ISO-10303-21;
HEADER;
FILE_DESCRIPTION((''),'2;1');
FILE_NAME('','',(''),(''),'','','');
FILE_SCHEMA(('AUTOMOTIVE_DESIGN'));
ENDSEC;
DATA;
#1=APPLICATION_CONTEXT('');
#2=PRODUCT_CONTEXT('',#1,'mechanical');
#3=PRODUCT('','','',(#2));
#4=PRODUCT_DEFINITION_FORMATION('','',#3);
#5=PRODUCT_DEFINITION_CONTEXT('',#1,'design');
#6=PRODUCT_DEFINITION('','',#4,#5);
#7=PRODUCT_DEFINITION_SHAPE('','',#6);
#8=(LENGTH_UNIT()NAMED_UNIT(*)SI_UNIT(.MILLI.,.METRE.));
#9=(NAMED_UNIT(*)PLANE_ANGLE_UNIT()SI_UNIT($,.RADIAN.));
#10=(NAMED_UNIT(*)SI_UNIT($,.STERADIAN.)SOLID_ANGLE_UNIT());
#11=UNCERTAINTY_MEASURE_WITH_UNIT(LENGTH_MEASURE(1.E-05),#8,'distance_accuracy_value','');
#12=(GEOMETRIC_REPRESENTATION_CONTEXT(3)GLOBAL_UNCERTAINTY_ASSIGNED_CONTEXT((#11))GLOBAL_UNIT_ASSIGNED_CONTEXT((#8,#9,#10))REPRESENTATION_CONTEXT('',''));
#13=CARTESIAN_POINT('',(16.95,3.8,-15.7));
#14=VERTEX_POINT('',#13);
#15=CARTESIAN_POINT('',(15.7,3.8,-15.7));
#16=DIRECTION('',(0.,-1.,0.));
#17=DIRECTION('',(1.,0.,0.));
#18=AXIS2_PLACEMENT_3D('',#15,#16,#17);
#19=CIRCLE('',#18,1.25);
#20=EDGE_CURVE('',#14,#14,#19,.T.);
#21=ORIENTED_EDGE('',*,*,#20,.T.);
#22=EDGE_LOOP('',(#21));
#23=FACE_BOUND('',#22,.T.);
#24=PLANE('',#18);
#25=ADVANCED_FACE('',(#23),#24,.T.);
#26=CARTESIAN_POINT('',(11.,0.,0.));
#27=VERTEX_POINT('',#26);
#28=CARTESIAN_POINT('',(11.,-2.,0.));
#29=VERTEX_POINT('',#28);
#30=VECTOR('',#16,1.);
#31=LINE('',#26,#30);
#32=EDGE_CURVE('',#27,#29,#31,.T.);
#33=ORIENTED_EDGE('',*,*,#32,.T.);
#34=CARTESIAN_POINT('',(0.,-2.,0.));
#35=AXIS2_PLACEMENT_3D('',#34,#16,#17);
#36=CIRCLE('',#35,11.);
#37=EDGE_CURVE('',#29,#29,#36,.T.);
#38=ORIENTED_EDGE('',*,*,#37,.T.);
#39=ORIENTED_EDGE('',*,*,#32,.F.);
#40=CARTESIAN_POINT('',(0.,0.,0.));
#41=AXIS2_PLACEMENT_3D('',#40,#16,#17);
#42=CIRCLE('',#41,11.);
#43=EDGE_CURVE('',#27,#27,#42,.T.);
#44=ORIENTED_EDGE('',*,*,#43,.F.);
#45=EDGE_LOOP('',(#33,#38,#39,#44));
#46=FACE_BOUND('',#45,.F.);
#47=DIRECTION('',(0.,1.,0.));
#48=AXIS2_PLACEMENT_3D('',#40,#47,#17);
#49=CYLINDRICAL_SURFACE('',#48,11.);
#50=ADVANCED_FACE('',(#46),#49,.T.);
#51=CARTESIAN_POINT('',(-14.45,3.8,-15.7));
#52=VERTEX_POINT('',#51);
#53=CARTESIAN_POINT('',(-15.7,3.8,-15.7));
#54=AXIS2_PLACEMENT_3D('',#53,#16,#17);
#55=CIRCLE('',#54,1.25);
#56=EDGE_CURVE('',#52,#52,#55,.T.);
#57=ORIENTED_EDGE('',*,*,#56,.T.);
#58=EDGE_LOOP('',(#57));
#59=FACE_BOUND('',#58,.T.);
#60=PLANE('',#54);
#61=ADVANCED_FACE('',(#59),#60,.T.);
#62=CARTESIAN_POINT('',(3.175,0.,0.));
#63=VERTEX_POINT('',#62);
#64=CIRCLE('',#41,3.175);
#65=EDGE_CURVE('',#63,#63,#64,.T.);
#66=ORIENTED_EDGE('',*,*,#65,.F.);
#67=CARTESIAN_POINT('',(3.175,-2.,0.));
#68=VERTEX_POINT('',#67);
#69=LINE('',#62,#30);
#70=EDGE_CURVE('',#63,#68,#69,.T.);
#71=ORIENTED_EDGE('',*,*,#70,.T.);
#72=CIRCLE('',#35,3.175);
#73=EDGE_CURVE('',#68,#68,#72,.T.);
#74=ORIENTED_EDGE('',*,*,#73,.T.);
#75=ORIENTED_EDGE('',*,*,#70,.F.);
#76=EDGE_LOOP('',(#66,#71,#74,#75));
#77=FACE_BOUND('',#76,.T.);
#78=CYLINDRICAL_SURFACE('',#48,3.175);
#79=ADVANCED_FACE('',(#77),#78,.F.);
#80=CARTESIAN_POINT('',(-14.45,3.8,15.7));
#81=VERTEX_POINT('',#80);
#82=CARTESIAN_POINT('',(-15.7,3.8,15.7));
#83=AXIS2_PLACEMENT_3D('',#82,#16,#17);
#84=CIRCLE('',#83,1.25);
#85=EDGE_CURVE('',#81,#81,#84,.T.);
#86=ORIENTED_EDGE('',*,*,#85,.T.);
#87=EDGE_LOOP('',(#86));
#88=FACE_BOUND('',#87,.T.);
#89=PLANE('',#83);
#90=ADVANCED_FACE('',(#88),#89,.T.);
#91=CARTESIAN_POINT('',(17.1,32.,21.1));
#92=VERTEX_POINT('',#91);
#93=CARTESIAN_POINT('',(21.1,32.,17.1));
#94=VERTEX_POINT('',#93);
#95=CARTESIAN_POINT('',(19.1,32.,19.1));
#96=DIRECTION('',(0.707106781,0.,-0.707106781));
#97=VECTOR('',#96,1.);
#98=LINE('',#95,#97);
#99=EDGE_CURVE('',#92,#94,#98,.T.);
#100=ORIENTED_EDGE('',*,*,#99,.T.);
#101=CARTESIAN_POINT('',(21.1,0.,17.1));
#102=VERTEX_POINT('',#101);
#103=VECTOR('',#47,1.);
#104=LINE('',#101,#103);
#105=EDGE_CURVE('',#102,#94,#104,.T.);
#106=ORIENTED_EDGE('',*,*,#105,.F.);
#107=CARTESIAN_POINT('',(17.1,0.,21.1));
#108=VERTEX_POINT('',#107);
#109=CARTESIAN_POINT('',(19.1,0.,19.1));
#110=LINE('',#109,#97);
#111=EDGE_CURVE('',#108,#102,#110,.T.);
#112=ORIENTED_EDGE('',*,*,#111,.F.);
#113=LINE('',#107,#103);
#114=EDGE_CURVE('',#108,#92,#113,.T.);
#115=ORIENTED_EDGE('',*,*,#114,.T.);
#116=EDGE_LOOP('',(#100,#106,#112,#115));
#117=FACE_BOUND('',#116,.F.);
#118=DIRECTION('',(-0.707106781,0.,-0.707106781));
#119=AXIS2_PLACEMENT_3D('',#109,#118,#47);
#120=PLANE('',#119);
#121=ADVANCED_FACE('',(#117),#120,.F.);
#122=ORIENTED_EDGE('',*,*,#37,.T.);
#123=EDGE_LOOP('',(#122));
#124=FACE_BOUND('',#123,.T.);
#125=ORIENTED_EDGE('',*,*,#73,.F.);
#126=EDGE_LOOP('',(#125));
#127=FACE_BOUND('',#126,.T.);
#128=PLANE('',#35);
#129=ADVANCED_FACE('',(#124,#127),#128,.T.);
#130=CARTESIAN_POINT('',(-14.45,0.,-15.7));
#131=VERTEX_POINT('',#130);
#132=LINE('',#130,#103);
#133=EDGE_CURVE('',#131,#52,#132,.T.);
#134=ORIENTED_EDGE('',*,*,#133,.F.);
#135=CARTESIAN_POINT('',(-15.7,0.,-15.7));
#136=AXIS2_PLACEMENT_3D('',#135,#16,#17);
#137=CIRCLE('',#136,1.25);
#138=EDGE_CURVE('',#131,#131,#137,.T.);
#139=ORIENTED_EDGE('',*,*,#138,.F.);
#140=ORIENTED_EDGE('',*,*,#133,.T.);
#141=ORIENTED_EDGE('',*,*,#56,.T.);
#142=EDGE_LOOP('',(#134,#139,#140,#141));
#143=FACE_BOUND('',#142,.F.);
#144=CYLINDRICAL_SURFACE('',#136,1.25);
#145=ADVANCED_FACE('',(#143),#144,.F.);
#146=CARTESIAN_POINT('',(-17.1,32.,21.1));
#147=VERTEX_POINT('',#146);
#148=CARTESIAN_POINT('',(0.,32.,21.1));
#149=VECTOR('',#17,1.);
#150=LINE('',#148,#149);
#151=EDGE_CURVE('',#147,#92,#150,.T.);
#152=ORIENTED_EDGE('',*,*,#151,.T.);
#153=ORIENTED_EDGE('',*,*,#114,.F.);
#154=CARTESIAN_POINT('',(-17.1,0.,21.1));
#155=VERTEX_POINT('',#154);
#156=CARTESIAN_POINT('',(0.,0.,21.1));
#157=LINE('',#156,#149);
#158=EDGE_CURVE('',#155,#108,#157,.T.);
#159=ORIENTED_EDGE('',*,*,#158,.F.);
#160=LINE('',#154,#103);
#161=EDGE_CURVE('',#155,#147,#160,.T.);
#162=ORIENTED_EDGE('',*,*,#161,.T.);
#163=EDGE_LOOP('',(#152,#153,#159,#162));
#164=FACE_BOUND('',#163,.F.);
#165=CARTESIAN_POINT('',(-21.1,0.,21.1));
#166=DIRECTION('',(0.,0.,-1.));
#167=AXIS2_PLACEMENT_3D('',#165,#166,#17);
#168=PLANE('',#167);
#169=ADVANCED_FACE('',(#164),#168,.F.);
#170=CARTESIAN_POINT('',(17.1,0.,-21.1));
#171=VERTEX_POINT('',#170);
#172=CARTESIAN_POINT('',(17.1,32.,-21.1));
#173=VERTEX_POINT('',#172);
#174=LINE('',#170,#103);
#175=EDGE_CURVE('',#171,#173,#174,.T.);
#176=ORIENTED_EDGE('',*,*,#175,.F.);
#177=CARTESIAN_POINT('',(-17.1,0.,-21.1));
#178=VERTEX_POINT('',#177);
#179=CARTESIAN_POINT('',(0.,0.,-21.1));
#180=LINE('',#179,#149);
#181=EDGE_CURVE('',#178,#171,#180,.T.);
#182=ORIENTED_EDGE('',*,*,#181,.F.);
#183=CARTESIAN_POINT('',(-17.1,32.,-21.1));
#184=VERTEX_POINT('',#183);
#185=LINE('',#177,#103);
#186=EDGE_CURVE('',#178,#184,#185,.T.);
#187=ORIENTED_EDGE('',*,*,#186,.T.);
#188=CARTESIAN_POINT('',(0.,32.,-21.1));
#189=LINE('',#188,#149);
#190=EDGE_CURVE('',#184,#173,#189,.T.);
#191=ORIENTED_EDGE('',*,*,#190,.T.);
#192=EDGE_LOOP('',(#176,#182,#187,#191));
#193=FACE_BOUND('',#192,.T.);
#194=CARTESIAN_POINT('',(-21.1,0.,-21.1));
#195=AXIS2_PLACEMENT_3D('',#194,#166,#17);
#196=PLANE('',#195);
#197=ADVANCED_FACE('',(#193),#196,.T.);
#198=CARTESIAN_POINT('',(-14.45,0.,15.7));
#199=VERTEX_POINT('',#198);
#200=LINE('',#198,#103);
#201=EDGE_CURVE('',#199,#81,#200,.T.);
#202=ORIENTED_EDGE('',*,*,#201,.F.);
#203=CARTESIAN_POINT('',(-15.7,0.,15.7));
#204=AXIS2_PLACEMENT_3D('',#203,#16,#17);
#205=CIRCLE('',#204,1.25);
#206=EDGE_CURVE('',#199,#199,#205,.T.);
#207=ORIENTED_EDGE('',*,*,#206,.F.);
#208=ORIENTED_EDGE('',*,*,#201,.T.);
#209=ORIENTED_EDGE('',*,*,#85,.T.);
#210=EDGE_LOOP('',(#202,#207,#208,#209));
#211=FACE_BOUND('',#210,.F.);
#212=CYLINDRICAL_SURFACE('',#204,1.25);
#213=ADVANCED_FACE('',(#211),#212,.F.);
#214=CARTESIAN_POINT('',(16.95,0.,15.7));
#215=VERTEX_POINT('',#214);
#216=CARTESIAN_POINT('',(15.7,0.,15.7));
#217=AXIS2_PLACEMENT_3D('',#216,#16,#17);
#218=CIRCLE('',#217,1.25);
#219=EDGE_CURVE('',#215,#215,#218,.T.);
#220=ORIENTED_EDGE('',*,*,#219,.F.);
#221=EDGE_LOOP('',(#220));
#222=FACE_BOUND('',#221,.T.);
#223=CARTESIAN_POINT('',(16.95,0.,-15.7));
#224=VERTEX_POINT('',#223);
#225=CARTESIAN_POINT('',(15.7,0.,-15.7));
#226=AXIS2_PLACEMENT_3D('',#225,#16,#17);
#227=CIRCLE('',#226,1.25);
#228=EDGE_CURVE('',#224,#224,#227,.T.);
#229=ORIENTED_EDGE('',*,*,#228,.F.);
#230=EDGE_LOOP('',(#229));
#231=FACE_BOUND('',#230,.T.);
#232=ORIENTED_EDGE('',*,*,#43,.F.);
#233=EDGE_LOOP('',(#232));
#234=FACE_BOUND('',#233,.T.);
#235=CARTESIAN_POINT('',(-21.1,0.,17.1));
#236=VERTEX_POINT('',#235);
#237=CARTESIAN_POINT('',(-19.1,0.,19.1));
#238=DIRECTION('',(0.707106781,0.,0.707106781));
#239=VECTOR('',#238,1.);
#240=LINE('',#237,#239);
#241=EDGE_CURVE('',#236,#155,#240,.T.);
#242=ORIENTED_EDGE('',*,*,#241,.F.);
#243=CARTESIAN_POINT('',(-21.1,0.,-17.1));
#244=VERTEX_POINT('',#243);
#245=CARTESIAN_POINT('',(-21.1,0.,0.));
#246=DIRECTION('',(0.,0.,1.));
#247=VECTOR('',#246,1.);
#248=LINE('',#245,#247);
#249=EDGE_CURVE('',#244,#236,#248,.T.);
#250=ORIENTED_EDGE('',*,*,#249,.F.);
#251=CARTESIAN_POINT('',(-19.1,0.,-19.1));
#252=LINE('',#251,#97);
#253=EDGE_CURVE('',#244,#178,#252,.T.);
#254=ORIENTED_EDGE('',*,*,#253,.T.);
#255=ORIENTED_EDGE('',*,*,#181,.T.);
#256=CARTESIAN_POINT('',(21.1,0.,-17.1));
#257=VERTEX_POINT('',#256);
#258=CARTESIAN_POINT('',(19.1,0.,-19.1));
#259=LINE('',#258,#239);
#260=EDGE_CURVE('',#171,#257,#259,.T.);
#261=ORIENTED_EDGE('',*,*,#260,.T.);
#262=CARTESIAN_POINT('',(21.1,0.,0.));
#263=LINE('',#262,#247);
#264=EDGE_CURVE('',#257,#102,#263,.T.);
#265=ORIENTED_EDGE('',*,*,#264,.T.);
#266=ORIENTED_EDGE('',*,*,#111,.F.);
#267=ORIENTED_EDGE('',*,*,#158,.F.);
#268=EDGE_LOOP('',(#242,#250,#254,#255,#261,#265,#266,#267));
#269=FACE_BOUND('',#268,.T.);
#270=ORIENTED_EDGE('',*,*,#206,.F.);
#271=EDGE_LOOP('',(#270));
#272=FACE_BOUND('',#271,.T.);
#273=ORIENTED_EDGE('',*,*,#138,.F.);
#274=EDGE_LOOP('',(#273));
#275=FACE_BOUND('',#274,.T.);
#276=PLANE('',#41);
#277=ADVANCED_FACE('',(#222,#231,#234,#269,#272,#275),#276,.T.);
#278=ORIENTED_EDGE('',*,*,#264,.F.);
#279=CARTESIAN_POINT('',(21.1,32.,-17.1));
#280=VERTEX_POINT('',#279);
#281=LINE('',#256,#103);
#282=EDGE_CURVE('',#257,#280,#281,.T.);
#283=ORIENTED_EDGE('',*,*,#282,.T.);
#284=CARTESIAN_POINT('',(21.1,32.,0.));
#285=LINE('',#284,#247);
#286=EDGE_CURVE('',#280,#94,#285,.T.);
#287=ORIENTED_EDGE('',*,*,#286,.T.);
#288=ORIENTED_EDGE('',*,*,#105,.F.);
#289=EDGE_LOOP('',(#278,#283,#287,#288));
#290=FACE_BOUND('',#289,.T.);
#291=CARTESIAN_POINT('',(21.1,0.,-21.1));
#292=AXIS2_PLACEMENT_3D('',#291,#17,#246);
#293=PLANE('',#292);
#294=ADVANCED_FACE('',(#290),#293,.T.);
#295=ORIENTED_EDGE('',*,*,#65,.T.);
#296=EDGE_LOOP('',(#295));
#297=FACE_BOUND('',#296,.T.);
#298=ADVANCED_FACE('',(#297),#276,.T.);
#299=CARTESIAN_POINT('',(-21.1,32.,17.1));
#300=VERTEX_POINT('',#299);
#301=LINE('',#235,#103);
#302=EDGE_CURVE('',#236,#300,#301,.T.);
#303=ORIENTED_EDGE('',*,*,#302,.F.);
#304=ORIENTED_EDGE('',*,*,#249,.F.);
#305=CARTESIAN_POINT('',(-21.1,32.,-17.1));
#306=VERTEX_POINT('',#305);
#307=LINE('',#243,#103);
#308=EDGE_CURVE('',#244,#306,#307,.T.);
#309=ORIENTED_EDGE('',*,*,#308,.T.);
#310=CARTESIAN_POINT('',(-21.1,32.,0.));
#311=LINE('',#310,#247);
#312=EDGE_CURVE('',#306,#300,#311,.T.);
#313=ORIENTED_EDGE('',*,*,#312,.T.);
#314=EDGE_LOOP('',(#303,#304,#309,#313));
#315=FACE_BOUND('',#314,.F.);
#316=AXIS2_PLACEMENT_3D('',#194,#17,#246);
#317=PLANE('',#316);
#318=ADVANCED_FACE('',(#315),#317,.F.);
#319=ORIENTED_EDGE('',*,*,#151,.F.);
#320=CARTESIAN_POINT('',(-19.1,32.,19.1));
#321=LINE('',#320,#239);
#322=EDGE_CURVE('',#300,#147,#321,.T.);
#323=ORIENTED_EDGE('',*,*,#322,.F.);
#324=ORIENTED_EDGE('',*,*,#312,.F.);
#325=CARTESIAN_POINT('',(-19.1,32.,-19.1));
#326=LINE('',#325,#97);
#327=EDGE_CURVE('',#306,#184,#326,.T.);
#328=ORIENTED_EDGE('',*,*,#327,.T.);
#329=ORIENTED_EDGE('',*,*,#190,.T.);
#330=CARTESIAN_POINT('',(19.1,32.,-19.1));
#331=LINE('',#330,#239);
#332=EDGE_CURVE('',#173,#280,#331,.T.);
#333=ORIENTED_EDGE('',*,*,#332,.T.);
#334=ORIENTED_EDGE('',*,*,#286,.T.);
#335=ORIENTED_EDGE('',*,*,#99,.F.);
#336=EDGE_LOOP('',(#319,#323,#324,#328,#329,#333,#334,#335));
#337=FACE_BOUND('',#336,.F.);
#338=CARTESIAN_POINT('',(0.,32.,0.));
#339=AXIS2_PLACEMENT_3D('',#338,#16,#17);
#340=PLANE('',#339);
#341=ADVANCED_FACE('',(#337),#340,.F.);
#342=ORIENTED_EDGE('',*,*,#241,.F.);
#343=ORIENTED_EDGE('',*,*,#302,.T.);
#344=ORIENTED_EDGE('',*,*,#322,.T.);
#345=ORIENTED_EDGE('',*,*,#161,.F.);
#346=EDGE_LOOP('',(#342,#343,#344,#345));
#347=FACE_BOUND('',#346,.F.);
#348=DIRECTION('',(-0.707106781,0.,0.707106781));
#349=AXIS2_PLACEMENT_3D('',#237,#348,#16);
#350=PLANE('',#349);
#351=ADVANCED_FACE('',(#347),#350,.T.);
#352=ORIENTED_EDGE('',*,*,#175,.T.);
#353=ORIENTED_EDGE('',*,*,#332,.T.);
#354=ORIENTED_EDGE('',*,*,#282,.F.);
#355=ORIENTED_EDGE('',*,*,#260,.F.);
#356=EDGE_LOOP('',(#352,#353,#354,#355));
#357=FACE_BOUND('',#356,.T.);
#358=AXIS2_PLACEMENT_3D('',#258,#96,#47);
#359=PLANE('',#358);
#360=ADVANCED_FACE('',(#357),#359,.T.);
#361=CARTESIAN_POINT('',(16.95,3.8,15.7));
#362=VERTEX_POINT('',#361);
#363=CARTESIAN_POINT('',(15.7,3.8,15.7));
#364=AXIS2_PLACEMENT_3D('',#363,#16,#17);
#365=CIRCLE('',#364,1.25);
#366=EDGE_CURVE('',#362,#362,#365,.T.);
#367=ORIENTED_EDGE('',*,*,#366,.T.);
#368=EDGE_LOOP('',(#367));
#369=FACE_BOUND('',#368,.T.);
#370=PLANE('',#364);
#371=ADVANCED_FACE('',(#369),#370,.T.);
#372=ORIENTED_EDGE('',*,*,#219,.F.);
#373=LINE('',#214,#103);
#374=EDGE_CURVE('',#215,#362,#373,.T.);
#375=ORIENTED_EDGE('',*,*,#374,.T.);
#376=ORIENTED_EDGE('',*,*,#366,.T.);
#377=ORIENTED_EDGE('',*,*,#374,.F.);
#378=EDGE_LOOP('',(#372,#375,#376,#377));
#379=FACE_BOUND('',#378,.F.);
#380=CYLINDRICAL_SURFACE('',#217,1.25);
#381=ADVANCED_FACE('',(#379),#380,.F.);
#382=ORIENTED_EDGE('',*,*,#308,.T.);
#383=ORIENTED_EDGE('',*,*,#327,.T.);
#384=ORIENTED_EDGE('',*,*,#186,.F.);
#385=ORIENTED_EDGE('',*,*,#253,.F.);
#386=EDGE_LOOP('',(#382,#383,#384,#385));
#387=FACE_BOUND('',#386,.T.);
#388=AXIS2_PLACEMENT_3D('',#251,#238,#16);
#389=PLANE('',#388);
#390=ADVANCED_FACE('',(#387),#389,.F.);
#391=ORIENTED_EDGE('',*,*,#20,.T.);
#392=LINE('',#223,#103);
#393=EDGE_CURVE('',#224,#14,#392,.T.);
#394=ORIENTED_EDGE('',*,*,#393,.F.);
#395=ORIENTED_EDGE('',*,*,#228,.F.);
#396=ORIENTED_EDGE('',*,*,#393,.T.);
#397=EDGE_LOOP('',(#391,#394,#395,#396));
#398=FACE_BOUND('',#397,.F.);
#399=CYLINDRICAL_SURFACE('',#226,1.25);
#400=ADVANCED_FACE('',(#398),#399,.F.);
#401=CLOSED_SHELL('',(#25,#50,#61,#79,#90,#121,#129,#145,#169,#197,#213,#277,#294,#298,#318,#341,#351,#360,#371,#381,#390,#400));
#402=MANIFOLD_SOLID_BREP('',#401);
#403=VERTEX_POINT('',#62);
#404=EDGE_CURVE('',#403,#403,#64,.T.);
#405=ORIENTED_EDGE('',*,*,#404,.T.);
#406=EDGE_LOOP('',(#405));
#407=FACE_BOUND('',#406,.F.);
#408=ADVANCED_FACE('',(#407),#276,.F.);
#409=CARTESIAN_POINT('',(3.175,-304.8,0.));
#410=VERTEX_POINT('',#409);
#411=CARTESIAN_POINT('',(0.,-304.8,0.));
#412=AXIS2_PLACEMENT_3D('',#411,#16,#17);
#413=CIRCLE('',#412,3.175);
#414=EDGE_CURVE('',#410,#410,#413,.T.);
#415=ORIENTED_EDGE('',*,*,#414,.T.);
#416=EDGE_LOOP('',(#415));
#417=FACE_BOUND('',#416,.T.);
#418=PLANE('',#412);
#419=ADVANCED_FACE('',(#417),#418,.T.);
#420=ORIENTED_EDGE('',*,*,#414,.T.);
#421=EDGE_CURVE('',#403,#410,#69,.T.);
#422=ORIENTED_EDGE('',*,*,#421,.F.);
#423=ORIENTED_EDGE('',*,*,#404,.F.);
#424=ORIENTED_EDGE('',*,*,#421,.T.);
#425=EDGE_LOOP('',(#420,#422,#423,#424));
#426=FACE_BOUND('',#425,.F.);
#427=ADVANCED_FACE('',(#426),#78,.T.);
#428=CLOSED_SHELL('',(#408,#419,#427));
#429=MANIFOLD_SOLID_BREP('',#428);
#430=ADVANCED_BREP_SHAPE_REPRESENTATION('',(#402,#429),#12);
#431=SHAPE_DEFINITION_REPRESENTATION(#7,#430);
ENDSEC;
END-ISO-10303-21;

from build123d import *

# Parameters (mm, degrees)
F0_W     = 42.2
F0_H     = 42.2
F0_R     = 1.25
F0_R_2   = 11
F0_R_3   = 3.175
F1_DEPTH = 32
F2_DEPTH = 304.8
F3_DEPTH = 2
F4_DEPTH = 3.8
F5_SIZE  = 4


with BuildPart() as f1:
    # F0 (on Front) → F1 (new body)
    with BuildSketch(Plane.XZ):
        Rectangle(F0_W, F0_H)
        with Locations((-15.7, -15.7)):
            Circle(F0_R, mode=Mode.SUBTRACT)
        with Locations((15.7, -15.7)):
            Circle(F0_R, mode=Mode.SUBTRACT)
        with Locations((-15.7, 15.7)):
            Circle(F0_R, mode=Mode.SUBTRACT)
        Circle(F0_R_2, mode=Mode.SUBTRACT)
        with Locations((15.7, 15.7)):
            Circle(F0_R, mode=Mode.SUBTRACT)
        with Locations((15.7, 15.7)):
            Circle(F0_R)
        with Locations((15.7, -15.7)):
            Circle(F0_R)
        with Locations((-15.7, -15.7)):
            Circle(F0_R)
        with Locations((-15.7, 15.7)):
            Circle(F0_R)
        Circle(F0_R_2)
        Circle(F0_R_3, mode=Mode.SUBTRACT)
        Circle(F0_R_3)
    extrude(amount=-F1_DEPTH)

    # F0 (on Front) → F3 (join)
    with BuildSketch(Plane.XZ):
        Circle(F0_R_2)
        Circle(F0_R_3, mode=Mode.SUBTRACT)
    extrude(amount=F3_DEPTH)

    # F0 (on Front) → F4 (cut)
    with BuildSketch(Plane.XZ):
        with Locations((-15.7, 15.7)):
            Circle(F0_R)
        with Locations((15.7, 15.7)):
            Circle(F0_R)
        with Locations((15.7, -15.7)):
            Circle(F0_R)
        with Locations((-15.7, -15.7)):
            Circle(F0_R)
    extrude(amount=-F4_DEPTH, mode=Mode.SUBTRACT)

    # F5
    f5_edges = [f1.edges().sort_by_distance(p)[0] for p in [
        (-21.1, 16, 21.1),
        (21.1, 16, 21.1),
        (21.1, 16, -21.1),
        (-21.1, 16, -21.1),
    ]]
    chamfer(f5_edges, length=F5_SIZE)


with BuildPart() as f2:
    # F0 (on Front) → F2 (new body)
    with BuildSketch(Plane.XZ):
        Circle(F0_R_3)
    extrude(amount=F2_DEPTH)


solid = Compound([f1.part, f2.part])
